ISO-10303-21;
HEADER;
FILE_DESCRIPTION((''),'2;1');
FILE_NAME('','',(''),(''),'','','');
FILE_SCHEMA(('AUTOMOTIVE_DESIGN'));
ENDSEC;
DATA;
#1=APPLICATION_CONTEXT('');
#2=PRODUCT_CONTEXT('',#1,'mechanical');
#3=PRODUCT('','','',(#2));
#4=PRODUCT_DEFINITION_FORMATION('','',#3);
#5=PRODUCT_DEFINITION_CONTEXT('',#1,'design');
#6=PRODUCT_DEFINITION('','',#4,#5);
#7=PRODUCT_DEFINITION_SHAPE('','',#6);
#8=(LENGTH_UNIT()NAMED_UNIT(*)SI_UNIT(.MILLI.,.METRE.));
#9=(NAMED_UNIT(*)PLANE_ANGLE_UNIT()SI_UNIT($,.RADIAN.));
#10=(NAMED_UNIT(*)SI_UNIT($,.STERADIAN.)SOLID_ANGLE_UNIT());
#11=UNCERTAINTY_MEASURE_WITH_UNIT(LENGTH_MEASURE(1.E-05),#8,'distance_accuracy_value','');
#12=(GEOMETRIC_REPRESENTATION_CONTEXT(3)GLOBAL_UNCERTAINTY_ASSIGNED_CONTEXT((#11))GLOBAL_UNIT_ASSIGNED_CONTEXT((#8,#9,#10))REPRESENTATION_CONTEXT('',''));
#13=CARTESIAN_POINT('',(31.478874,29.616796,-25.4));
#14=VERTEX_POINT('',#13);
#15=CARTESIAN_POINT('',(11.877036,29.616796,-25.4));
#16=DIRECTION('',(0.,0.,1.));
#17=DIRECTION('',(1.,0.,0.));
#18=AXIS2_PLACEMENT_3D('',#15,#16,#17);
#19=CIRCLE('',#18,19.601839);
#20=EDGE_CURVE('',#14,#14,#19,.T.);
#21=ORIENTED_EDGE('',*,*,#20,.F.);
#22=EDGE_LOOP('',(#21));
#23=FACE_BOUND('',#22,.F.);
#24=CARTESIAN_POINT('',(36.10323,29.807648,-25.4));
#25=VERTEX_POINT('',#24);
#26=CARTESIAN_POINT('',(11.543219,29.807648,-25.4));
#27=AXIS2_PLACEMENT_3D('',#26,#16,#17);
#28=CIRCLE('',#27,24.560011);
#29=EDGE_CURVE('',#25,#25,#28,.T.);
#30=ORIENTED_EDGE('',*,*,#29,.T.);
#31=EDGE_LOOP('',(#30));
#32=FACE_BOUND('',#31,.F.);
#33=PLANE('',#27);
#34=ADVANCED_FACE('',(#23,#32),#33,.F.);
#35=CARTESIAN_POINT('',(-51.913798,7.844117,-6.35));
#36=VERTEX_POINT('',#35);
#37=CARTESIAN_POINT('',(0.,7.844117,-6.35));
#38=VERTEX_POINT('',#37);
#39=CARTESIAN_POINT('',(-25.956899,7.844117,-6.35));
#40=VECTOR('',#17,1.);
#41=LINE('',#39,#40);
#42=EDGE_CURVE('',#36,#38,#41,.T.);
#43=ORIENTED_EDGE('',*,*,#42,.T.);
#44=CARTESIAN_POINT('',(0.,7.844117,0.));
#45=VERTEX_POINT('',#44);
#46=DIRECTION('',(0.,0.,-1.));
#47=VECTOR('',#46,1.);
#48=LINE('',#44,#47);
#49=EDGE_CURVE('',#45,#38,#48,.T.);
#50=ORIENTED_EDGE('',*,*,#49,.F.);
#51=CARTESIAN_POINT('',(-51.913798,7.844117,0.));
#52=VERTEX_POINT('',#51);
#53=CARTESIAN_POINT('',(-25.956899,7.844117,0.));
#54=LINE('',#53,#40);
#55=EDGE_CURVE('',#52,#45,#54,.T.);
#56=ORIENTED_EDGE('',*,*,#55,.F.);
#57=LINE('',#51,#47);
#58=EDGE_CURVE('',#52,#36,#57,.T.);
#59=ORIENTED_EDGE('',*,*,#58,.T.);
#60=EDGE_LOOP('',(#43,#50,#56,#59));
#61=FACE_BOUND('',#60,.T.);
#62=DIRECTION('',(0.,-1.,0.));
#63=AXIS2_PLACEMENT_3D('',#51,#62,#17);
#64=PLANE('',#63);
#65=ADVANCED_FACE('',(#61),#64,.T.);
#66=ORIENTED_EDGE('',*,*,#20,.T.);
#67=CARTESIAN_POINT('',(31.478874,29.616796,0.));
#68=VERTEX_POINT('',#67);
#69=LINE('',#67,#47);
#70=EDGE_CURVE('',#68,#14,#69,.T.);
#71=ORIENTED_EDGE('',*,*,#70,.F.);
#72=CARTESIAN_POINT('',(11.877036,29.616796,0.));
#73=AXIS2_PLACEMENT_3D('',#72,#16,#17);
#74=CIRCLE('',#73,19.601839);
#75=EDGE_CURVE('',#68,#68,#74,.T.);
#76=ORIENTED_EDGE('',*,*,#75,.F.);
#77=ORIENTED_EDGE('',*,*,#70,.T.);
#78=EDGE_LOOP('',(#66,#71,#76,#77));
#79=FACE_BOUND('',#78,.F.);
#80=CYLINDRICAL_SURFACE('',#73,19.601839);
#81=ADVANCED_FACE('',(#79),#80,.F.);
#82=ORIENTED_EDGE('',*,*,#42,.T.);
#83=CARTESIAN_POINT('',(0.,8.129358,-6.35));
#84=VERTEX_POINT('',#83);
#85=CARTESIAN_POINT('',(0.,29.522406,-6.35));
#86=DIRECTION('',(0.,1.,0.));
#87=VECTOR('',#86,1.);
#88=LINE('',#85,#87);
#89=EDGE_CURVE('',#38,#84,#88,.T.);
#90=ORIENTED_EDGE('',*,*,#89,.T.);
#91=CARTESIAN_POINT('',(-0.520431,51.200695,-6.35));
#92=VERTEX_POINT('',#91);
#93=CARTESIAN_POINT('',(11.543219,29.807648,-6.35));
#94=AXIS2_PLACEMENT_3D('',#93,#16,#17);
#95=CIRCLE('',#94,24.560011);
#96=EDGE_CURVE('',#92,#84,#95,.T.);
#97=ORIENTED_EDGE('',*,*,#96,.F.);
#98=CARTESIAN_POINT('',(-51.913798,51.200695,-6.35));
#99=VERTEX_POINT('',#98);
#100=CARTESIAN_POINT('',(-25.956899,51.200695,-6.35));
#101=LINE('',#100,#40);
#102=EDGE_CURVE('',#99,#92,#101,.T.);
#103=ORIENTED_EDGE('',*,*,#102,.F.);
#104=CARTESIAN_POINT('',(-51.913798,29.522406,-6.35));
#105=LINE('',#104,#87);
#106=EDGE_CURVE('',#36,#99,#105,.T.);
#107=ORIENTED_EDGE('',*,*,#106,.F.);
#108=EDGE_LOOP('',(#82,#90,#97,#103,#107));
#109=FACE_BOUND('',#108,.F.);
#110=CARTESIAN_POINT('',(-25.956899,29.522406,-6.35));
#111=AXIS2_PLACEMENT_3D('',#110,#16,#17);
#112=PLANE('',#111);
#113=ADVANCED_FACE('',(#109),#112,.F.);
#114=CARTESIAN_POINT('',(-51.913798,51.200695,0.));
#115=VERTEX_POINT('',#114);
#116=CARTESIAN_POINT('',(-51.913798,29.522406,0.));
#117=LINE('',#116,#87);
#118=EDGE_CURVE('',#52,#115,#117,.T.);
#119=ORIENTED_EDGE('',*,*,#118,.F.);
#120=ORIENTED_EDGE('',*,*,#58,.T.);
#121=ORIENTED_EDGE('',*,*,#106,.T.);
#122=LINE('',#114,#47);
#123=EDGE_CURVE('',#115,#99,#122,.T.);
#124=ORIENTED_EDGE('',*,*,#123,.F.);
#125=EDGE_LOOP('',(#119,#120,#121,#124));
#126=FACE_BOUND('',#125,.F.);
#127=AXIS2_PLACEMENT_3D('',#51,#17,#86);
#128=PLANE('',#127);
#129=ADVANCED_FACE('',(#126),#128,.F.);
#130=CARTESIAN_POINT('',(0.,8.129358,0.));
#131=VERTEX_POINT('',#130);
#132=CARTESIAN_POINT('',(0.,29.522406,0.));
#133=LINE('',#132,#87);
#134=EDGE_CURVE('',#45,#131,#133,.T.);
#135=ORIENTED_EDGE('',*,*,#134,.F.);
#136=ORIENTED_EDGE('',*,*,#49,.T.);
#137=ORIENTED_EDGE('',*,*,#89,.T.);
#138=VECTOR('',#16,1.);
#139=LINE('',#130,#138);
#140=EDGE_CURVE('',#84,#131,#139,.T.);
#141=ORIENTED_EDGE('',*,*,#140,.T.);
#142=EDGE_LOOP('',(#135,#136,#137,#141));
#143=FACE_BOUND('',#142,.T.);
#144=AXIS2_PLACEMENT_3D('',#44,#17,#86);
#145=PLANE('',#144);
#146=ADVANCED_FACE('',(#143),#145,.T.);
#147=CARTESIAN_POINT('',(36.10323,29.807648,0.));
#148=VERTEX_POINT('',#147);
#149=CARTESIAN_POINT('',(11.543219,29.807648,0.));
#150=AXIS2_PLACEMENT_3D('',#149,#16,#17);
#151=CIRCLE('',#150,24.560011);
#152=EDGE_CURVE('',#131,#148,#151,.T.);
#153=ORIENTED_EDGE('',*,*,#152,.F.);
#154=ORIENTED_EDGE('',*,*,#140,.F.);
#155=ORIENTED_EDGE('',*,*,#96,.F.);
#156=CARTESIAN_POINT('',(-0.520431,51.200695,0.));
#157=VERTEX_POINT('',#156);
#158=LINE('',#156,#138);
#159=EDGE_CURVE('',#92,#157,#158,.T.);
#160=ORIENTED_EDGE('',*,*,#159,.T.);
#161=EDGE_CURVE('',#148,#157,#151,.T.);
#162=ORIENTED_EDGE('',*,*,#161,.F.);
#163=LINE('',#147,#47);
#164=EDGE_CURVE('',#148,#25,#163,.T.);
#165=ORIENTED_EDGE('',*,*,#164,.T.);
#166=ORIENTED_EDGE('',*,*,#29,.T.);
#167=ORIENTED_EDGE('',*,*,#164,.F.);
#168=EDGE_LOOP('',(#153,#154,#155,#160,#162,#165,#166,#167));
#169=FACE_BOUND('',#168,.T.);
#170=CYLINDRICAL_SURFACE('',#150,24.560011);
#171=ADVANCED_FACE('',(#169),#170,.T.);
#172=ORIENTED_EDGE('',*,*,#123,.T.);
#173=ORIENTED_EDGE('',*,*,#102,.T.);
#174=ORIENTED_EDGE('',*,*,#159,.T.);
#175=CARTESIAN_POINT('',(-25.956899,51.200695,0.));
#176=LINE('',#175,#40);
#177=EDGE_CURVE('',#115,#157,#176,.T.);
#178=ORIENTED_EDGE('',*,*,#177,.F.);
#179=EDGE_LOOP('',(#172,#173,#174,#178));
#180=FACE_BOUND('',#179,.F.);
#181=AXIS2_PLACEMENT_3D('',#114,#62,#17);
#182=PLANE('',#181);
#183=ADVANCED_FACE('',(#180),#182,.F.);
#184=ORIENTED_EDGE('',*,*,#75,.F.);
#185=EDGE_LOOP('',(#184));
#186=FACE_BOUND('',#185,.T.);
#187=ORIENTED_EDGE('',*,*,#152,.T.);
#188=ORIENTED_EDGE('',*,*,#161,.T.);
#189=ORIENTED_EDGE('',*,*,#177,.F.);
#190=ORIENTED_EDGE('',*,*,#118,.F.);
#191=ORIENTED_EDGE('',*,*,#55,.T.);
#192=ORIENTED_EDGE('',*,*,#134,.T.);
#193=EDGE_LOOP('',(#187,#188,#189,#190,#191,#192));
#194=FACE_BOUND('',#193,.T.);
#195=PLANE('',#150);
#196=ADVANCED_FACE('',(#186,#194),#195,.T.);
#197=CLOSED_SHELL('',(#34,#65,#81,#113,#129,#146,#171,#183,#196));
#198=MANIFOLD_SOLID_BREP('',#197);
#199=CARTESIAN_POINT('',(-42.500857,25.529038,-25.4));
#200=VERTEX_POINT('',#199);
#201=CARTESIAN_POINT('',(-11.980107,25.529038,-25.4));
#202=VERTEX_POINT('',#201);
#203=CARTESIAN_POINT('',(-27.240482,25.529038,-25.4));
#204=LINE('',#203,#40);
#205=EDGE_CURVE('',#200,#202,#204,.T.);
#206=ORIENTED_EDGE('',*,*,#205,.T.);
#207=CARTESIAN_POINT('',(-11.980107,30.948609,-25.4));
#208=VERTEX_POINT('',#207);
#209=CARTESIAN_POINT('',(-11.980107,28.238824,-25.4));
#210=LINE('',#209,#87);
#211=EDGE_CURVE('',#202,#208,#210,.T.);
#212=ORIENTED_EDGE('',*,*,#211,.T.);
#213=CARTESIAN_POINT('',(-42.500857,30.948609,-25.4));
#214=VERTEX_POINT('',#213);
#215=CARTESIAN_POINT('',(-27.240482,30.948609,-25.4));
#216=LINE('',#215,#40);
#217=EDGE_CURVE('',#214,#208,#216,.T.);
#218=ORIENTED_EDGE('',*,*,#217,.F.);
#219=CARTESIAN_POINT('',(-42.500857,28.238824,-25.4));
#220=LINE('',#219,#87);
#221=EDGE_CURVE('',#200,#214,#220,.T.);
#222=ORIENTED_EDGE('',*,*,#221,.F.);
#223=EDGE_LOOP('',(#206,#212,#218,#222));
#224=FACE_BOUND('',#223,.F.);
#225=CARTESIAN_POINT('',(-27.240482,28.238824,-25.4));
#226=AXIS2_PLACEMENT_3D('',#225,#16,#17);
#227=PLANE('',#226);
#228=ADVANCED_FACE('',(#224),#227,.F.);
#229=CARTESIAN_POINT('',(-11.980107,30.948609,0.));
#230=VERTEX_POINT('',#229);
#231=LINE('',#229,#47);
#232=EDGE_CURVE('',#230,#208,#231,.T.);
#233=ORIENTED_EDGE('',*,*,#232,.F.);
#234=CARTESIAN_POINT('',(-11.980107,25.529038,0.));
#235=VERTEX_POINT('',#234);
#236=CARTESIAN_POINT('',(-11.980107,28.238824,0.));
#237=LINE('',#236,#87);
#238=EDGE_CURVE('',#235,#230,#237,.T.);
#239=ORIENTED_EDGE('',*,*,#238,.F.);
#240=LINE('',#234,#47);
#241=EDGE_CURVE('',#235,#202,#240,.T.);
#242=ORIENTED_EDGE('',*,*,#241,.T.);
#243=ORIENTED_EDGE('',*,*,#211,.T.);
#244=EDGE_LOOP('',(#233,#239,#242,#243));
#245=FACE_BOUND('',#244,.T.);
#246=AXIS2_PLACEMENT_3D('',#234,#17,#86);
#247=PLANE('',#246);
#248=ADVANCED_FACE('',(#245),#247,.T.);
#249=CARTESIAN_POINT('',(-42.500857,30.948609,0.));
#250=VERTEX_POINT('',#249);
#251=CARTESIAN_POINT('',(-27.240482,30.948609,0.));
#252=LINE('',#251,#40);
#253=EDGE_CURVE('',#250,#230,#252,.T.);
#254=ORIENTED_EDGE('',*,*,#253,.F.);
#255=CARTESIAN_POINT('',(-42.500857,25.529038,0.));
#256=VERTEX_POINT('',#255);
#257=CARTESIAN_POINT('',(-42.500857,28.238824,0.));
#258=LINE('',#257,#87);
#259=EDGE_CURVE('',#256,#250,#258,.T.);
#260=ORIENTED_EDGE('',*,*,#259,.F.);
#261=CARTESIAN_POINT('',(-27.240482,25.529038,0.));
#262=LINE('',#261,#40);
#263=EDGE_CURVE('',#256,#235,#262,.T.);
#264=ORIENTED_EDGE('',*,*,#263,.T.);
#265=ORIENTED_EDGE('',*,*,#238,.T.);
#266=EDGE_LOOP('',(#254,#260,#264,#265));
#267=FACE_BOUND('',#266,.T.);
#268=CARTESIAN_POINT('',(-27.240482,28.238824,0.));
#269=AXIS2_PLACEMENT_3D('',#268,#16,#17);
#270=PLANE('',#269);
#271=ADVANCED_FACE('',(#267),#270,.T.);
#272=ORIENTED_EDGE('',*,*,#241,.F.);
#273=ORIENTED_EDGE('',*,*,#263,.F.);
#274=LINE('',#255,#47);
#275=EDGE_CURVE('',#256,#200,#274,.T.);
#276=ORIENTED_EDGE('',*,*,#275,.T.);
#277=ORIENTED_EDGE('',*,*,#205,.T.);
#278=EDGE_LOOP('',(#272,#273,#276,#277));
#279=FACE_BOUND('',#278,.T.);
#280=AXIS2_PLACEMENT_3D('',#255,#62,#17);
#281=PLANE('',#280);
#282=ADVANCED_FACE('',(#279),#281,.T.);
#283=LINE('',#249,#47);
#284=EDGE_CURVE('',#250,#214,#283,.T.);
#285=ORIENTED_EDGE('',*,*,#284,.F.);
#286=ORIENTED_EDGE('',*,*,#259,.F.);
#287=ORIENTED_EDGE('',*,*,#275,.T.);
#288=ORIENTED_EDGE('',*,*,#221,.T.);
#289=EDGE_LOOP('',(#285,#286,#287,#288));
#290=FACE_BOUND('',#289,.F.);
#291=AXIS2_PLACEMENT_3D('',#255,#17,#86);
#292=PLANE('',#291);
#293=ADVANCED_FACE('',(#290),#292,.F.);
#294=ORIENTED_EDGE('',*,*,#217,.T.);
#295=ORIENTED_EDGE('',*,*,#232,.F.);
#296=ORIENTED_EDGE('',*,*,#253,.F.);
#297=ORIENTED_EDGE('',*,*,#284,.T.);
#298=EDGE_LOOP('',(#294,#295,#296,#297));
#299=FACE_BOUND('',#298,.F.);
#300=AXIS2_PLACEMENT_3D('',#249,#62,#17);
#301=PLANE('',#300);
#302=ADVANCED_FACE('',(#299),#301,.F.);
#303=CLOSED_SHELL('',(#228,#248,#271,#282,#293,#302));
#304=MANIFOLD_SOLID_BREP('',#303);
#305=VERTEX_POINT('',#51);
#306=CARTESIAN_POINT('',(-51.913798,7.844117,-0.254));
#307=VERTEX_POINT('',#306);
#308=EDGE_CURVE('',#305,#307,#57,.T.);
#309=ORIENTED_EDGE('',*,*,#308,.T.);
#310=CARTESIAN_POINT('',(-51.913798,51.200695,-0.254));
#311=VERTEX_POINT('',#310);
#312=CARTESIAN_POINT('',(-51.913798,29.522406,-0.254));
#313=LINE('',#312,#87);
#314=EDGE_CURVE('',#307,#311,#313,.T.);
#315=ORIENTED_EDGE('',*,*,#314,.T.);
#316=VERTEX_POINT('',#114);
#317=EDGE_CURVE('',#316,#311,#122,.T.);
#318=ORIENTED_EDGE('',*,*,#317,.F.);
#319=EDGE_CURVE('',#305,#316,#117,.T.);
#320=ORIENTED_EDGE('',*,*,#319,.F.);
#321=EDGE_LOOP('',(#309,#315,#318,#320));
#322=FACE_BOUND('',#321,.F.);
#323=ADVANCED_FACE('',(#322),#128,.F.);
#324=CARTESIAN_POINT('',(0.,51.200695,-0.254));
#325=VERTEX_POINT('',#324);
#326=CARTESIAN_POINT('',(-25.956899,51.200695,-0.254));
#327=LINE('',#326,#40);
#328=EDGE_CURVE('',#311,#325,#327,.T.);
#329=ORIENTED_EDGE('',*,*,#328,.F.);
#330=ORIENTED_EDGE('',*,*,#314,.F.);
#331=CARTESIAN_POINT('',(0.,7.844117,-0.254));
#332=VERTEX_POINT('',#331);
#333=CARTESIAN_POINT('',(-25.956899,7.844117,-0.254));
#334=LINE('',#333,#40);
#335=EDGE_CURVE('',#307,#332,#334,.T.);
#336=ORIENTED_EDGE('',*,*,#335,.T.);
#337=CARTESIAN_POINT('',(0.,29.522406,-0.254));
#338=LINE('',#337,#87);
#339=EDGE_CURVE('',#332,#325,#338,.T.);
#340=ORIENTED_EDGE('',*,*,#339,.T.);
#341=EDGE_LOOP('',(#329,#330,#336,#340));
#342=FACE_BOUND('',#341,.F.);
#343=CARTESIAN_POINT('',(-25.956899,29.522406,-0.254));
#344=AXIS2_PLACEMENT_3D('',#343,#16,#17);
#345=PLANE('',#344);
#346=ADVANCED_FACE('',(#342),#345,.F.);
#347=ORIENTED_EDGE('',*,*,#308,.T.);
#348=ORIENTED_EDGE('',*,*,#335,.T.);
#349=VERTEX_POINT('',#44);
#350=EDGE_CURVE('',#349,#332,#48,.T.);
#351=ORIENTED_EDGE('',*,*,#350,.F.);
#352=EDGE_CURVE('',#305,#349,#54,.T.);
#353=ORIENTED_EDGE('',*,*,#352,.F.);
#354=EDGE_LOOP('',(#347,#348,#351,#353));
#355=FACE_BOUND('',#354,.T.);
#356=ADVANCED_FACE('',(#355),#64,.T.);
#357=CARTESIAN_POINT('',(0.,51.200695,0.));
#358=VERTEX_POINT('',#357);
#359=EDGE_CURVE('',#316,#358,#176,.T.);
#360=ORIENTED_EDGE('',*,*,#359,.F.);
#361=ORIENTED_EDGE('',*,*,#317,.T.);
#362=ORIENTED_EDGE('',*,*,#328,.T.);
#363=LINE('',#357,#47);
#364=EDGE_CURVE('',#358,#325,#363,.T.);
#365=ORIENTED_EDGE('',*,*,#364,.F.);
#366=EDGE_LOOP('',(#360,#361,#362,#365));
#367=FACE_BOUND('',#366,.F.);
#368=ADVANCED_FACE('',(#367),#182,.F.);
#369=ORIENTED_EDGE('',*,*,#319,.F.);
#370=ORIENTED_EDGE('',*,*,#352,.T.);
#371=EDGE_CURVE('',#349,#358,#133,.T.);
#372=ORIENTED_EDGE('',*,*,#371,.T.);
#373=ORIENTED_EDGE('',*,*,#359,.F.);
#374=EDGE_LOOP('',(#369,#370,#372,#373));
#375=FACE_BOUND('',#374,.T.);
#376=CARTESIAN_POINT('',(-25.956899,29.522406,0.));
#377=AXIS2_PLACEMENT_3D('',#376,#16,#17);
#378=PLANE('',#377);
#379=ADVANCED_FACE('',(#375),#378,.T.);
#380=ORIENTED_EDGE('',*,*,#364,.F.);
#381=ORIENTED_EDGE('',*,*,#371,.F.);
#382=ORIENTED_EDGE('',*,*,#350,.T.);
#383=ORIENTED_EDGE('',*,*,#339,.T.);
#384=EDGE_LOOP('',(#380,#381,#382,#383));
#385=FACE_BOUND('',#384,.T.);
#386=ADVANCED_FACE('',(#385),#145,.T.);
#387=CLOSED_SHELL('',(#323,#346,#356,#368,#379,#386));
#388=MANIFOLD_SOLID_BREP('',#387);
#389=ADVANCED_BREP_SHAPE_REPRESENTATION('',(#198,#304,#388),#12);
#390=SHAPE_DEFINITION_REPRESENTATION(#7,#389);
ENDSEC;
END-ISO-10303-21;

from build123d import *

# Parameters (mm, degrees)
F0_W     = 51.9137978554
F0_H     = 43.3565778658
F1_DEPTH = 6.35
F2_R     = 24.5600108098
F3_DEPTH = 25.4
F4_R     = 19.6018385594
F5_DEPTH = 43.18
F6_DEPTH = 0.254
F7_W     = 30.5207502097
F7_H     = 5.4195709527
F8_DEPTH = 25.4


# Not quite as in the source:
# - a feature of the source that left no trace in its solid (it failed there, or was rolled back) is left out


with BuildPart() as f1:
    # F0 (on Top) → F1 (new body)
    with BuildSketch(Plane.XY):
        with Locations((-25.9568989277, 29.522406403)):
            Rectangle(F0_W, F0_H)
    extrude(amount=-F1_DEPTH)

    # F2 (on Top) → F3 (join)
    with BuildSketch(Plane.XY):
        with Locations((11.5432187769, 29.8076476902)):
            Circle(F2_R)
    extrude(amount=-F3_DEPTH)

    # F4 (on Top) → F5 (cut)
    with BuildSketch(Plane.XY):
        with Locations((11.8770356263, 29.6167964683)):
            Circle(F4_R)
    extrude(amount=-F5_DEPTH, mode=Mode.SUBTRACT)


with BuildPart() as f6:
    # F0 (on Top) → F6 (new body)
    with BuildSketch(Plane.XY):
        with Locations((-25.9568989277, 29.522406403)):
            Rectangle(F0_W, F0_H)
    extrude(amount=-F6_DEPTH)


with BuildPart() as f8:
    # F7 (on Top) → F8 (new body)
    with BuildSketch(Plane.XY):
        with Locations((-27.240482159, 28.2388236374)):
            Rectangle(F7_W, F7_H)
    extrude(amount=-F8_DEPTH)


solid = Compound([f1.part, f6.part, f8.part])
